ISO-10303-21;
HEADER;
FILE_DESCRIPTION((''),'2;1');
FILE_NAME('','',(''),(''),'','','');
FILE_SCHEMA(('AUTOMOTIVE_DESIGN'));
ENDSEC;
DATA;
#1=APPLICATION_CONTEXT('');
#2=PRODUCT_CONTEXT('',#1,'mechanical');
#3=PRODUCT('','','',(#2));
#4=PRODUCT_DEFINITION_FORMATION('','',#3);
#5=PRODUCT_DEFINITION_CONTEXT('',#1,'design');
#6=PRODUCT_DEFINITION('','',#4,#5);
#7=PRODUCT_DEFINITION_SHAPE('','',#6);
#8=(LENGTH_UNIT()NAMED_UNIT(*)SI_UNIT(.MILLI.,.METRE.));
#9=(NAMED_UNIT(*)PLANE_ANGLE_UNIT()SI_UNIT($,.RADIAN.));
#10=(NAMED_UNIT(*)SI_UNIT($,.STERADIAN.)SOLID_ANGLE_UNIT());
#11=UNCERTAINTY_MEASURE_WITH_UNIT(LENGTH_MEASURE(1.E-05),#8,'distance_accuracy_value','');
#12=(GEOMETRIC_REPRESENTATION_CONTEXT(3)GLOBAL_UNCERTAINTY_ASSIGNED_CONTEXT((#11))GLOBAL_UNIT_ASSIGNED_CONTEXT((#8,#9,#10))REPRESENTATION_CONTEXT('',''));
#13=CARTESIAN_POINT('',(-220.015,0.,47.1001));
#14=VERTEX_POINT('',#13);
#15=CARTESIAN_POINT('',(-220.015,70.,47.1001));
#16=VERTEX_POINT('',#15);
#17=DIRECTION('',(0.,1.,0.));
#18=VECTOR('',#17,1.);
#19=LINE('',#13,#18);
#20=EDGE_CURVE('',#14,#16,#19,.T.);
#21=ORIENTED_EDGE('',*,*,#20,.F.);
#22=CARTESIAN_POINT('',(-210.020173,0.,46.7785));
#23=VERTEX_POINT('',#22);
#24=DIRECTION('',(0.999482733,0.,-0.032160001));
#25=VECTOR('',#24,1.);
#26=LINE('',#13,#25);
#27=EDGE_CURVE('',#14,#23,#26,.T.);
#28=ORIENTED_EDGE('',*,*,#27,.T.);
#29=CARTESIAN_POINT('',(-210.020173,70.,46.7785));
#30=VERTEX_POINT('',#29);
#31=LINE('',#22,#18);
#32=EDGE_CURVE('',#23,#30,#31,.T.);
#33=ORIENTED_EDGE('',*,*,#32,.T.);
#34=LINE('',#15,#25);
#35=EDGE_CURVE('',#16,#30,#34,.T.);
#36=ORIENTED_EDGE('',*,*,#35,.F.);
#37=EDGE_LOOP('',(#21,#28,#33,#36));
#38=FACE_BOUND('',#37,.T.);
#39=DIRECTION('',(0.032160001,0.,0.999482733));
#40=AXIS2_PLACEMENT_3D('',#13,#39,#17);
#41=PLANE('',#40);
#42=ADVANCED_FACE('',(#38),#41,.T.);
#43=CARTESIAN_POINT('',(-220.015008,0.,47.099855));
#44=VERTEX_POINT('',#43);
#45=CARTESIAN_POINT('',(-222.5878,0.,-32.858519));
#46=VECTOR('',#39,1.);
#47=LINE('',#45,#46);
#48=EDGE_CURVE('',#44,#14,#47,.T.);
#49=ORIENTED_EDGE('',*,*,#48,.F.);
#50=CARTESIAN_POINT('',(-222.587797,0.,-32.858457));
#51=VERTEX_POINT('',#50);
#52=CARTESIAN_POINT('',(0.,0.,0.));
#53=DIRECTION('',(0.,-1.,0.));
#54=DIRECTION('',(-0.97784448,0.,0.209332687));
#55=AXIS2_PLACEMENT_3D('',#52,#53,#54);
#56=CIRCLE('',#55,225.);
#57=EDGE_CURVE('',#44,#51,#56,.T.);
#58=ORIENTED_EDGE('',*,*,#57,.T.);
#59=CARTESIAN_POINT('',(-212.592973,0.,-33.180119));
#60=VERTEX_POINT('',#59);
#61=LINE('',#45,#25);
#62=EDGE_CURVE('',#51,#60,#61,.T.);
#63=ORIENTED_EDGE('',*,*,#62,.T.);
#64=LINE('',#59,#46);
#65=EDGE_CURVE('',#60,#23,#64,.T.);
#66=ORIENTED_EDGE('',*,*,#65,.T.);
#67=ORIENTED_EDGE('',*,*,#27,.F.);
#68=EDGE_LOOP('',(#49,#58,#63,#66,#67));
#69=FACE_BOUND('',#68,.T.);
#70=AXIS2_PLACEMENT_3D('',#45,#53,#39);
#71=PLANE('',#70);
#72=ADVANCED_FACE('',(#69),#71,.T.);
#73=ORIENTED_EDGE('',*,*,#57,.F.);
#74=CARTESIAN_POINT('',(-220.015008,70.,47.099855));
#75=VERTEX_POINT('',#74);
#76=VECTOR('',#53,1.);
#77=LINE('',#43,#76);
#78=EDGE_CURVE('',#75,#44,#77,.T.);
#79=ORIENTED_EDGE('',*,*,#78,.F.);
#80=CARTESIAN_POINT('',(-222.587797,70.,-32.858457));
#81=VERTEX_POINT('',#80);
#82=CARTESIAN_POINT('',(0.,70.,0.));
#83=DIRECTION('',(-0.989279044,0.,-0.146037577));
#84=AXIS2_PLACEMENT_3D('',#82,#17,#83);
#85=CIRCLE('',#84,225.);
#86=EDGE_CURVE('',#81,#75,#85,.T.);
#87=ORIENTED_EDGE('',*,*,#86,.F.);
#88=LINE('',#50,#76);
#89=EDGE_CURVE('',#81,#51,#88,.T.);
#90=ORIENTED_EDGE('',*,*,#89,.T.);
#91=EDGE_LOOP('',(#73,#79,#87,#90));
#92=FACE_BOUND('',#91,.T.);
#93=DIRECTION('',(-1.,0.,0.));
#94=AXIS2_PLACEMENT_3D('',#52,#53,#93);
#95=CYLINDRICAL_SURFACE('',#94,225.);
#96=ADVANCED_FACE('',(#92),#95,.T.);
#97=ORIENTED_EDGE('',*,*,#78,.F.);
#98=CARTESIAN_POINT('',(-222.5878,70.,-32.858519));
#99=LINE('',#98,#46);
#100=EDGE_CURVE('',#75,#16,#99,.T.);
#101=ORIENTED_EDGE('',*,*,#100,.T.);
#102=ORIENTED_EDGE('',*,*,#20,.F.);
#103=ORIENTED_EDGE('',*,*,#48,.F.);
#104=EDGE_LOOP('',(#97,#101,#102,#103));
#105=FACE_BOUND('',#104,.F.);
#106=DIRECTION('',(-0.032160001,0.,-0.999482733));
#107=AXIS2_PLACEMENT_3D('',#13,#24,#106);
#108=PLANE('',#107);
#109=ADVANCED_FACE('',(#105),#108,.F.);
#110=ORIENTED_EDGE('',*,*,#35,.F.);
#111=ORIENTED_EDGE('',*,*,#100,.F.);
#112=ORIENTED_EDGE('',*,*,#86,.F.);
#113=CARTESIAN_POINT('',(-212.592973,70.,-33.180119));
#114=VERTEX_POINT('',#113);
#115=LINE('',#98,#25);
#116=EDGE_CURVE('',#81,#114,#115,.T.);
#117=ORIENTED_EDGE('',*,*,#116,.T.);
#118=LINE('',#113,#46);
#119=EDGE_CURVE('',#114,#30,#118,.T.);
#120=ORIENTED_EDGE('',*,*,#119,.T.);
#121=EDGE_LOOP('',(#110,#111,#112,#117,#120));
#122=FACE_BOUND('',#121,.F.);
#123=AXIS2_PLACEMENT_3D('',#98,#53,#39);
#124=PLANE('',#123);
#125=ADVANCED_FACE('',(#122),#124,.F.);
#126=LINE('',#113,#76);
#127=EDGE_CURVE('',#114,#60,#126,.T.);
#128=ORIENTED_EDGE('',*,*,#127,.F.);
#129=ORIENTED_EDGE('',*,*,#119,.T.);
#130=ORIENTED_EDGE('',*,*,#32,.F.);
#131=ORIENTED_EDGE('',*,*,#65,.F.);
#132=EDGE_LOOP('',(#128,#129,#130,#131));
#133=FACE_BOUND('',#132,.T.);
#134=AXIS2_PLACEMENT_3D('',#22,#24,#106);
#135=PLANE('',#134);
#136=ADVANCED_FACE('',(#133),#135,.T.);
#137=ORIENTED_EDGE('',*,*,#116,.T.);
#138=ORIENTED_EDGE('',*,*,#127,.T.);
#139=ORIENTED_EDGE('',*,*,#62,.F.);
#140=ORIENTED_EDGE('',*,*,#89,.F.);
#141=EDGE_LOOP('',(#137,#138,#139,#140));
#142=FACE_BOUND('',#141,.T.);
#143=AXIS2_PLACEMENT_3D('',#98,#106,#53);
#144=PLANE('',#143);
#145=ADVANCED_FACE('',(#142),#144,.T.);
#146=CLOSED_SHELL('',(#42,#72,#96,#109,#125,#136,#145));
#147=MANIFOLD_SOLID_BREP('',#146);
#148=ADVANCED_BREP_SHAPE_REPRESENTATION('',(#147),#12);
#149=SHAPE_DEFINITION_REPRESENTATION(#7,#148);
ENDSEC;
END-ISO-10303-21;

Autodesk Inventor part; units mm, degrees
ref_plane "YZ Plane" through (0, 0, 0) normal (1, 0, 0) x (0, 1, 0)
ref_plane "XZ Plane" through (0, 0, 0) normal (0, 1, 0) x (-1, 0, 0)
sketch "Sketch1" plane through (0, 0, 0) normal (0, 1, 0) x (-1, 0, 0)
  point P0 (0, 0)
sketch "Sketch2" plane through (0, 0, 0) normal (0, 1, 0) x (-1, 0, 0)
  circle A0 centre (0, 0) radius 225
  dimension "d0" = 450
extrude "Extrusion1" add sketch "Sketch2" along normal blind 70
sketch "Sketch3" plane through (0, 70, 0) normal (0, 1, 0) x (1, 0, 0)
  circle A0 centre (0, 0) radius 225 projected
  line L0 (-222.5878, 32.8586) -> (-220.015, -47.1001)
  dimension "d3" = 80
split body "Split1" sketch "Sketch3" result one side removed curves L0 removed pieces at (-39.9451, 0.5, -49.4831)
sketch "Sketch4" plane through (-220.015, 0, 47.1001) normal (0.9994827, 0, -0.03216) x (-0.03216, 0, -0.9994827)
  line L0 (80, 70) -> (0, 70) projected
  line L1 (0, 70) -> (80, 70)
  line L2 (80, 70) -> (80, 0)
  line L3 (80, 0) -> (0, 0)
  line L4 (0, 0) -> (0, 70)
  point P0 (40, 0)
extrude "Extrusion2" add sketch "Sketch4" along normal blind 10
sketch "Sketch5" plane through (-210.0201, 0, 46.7785) normal (0.9994827, 0, -0.03216) x (-0.03216, 0, -0.9994827)
  point P0 (40, 0)
ref_plane "Work Plane1" through (-224.8836, 0, 7.236) normal (0.9994827, 0, -0.03216) x (0, 1, 0)
properties part number "Speaker Mount 1"
